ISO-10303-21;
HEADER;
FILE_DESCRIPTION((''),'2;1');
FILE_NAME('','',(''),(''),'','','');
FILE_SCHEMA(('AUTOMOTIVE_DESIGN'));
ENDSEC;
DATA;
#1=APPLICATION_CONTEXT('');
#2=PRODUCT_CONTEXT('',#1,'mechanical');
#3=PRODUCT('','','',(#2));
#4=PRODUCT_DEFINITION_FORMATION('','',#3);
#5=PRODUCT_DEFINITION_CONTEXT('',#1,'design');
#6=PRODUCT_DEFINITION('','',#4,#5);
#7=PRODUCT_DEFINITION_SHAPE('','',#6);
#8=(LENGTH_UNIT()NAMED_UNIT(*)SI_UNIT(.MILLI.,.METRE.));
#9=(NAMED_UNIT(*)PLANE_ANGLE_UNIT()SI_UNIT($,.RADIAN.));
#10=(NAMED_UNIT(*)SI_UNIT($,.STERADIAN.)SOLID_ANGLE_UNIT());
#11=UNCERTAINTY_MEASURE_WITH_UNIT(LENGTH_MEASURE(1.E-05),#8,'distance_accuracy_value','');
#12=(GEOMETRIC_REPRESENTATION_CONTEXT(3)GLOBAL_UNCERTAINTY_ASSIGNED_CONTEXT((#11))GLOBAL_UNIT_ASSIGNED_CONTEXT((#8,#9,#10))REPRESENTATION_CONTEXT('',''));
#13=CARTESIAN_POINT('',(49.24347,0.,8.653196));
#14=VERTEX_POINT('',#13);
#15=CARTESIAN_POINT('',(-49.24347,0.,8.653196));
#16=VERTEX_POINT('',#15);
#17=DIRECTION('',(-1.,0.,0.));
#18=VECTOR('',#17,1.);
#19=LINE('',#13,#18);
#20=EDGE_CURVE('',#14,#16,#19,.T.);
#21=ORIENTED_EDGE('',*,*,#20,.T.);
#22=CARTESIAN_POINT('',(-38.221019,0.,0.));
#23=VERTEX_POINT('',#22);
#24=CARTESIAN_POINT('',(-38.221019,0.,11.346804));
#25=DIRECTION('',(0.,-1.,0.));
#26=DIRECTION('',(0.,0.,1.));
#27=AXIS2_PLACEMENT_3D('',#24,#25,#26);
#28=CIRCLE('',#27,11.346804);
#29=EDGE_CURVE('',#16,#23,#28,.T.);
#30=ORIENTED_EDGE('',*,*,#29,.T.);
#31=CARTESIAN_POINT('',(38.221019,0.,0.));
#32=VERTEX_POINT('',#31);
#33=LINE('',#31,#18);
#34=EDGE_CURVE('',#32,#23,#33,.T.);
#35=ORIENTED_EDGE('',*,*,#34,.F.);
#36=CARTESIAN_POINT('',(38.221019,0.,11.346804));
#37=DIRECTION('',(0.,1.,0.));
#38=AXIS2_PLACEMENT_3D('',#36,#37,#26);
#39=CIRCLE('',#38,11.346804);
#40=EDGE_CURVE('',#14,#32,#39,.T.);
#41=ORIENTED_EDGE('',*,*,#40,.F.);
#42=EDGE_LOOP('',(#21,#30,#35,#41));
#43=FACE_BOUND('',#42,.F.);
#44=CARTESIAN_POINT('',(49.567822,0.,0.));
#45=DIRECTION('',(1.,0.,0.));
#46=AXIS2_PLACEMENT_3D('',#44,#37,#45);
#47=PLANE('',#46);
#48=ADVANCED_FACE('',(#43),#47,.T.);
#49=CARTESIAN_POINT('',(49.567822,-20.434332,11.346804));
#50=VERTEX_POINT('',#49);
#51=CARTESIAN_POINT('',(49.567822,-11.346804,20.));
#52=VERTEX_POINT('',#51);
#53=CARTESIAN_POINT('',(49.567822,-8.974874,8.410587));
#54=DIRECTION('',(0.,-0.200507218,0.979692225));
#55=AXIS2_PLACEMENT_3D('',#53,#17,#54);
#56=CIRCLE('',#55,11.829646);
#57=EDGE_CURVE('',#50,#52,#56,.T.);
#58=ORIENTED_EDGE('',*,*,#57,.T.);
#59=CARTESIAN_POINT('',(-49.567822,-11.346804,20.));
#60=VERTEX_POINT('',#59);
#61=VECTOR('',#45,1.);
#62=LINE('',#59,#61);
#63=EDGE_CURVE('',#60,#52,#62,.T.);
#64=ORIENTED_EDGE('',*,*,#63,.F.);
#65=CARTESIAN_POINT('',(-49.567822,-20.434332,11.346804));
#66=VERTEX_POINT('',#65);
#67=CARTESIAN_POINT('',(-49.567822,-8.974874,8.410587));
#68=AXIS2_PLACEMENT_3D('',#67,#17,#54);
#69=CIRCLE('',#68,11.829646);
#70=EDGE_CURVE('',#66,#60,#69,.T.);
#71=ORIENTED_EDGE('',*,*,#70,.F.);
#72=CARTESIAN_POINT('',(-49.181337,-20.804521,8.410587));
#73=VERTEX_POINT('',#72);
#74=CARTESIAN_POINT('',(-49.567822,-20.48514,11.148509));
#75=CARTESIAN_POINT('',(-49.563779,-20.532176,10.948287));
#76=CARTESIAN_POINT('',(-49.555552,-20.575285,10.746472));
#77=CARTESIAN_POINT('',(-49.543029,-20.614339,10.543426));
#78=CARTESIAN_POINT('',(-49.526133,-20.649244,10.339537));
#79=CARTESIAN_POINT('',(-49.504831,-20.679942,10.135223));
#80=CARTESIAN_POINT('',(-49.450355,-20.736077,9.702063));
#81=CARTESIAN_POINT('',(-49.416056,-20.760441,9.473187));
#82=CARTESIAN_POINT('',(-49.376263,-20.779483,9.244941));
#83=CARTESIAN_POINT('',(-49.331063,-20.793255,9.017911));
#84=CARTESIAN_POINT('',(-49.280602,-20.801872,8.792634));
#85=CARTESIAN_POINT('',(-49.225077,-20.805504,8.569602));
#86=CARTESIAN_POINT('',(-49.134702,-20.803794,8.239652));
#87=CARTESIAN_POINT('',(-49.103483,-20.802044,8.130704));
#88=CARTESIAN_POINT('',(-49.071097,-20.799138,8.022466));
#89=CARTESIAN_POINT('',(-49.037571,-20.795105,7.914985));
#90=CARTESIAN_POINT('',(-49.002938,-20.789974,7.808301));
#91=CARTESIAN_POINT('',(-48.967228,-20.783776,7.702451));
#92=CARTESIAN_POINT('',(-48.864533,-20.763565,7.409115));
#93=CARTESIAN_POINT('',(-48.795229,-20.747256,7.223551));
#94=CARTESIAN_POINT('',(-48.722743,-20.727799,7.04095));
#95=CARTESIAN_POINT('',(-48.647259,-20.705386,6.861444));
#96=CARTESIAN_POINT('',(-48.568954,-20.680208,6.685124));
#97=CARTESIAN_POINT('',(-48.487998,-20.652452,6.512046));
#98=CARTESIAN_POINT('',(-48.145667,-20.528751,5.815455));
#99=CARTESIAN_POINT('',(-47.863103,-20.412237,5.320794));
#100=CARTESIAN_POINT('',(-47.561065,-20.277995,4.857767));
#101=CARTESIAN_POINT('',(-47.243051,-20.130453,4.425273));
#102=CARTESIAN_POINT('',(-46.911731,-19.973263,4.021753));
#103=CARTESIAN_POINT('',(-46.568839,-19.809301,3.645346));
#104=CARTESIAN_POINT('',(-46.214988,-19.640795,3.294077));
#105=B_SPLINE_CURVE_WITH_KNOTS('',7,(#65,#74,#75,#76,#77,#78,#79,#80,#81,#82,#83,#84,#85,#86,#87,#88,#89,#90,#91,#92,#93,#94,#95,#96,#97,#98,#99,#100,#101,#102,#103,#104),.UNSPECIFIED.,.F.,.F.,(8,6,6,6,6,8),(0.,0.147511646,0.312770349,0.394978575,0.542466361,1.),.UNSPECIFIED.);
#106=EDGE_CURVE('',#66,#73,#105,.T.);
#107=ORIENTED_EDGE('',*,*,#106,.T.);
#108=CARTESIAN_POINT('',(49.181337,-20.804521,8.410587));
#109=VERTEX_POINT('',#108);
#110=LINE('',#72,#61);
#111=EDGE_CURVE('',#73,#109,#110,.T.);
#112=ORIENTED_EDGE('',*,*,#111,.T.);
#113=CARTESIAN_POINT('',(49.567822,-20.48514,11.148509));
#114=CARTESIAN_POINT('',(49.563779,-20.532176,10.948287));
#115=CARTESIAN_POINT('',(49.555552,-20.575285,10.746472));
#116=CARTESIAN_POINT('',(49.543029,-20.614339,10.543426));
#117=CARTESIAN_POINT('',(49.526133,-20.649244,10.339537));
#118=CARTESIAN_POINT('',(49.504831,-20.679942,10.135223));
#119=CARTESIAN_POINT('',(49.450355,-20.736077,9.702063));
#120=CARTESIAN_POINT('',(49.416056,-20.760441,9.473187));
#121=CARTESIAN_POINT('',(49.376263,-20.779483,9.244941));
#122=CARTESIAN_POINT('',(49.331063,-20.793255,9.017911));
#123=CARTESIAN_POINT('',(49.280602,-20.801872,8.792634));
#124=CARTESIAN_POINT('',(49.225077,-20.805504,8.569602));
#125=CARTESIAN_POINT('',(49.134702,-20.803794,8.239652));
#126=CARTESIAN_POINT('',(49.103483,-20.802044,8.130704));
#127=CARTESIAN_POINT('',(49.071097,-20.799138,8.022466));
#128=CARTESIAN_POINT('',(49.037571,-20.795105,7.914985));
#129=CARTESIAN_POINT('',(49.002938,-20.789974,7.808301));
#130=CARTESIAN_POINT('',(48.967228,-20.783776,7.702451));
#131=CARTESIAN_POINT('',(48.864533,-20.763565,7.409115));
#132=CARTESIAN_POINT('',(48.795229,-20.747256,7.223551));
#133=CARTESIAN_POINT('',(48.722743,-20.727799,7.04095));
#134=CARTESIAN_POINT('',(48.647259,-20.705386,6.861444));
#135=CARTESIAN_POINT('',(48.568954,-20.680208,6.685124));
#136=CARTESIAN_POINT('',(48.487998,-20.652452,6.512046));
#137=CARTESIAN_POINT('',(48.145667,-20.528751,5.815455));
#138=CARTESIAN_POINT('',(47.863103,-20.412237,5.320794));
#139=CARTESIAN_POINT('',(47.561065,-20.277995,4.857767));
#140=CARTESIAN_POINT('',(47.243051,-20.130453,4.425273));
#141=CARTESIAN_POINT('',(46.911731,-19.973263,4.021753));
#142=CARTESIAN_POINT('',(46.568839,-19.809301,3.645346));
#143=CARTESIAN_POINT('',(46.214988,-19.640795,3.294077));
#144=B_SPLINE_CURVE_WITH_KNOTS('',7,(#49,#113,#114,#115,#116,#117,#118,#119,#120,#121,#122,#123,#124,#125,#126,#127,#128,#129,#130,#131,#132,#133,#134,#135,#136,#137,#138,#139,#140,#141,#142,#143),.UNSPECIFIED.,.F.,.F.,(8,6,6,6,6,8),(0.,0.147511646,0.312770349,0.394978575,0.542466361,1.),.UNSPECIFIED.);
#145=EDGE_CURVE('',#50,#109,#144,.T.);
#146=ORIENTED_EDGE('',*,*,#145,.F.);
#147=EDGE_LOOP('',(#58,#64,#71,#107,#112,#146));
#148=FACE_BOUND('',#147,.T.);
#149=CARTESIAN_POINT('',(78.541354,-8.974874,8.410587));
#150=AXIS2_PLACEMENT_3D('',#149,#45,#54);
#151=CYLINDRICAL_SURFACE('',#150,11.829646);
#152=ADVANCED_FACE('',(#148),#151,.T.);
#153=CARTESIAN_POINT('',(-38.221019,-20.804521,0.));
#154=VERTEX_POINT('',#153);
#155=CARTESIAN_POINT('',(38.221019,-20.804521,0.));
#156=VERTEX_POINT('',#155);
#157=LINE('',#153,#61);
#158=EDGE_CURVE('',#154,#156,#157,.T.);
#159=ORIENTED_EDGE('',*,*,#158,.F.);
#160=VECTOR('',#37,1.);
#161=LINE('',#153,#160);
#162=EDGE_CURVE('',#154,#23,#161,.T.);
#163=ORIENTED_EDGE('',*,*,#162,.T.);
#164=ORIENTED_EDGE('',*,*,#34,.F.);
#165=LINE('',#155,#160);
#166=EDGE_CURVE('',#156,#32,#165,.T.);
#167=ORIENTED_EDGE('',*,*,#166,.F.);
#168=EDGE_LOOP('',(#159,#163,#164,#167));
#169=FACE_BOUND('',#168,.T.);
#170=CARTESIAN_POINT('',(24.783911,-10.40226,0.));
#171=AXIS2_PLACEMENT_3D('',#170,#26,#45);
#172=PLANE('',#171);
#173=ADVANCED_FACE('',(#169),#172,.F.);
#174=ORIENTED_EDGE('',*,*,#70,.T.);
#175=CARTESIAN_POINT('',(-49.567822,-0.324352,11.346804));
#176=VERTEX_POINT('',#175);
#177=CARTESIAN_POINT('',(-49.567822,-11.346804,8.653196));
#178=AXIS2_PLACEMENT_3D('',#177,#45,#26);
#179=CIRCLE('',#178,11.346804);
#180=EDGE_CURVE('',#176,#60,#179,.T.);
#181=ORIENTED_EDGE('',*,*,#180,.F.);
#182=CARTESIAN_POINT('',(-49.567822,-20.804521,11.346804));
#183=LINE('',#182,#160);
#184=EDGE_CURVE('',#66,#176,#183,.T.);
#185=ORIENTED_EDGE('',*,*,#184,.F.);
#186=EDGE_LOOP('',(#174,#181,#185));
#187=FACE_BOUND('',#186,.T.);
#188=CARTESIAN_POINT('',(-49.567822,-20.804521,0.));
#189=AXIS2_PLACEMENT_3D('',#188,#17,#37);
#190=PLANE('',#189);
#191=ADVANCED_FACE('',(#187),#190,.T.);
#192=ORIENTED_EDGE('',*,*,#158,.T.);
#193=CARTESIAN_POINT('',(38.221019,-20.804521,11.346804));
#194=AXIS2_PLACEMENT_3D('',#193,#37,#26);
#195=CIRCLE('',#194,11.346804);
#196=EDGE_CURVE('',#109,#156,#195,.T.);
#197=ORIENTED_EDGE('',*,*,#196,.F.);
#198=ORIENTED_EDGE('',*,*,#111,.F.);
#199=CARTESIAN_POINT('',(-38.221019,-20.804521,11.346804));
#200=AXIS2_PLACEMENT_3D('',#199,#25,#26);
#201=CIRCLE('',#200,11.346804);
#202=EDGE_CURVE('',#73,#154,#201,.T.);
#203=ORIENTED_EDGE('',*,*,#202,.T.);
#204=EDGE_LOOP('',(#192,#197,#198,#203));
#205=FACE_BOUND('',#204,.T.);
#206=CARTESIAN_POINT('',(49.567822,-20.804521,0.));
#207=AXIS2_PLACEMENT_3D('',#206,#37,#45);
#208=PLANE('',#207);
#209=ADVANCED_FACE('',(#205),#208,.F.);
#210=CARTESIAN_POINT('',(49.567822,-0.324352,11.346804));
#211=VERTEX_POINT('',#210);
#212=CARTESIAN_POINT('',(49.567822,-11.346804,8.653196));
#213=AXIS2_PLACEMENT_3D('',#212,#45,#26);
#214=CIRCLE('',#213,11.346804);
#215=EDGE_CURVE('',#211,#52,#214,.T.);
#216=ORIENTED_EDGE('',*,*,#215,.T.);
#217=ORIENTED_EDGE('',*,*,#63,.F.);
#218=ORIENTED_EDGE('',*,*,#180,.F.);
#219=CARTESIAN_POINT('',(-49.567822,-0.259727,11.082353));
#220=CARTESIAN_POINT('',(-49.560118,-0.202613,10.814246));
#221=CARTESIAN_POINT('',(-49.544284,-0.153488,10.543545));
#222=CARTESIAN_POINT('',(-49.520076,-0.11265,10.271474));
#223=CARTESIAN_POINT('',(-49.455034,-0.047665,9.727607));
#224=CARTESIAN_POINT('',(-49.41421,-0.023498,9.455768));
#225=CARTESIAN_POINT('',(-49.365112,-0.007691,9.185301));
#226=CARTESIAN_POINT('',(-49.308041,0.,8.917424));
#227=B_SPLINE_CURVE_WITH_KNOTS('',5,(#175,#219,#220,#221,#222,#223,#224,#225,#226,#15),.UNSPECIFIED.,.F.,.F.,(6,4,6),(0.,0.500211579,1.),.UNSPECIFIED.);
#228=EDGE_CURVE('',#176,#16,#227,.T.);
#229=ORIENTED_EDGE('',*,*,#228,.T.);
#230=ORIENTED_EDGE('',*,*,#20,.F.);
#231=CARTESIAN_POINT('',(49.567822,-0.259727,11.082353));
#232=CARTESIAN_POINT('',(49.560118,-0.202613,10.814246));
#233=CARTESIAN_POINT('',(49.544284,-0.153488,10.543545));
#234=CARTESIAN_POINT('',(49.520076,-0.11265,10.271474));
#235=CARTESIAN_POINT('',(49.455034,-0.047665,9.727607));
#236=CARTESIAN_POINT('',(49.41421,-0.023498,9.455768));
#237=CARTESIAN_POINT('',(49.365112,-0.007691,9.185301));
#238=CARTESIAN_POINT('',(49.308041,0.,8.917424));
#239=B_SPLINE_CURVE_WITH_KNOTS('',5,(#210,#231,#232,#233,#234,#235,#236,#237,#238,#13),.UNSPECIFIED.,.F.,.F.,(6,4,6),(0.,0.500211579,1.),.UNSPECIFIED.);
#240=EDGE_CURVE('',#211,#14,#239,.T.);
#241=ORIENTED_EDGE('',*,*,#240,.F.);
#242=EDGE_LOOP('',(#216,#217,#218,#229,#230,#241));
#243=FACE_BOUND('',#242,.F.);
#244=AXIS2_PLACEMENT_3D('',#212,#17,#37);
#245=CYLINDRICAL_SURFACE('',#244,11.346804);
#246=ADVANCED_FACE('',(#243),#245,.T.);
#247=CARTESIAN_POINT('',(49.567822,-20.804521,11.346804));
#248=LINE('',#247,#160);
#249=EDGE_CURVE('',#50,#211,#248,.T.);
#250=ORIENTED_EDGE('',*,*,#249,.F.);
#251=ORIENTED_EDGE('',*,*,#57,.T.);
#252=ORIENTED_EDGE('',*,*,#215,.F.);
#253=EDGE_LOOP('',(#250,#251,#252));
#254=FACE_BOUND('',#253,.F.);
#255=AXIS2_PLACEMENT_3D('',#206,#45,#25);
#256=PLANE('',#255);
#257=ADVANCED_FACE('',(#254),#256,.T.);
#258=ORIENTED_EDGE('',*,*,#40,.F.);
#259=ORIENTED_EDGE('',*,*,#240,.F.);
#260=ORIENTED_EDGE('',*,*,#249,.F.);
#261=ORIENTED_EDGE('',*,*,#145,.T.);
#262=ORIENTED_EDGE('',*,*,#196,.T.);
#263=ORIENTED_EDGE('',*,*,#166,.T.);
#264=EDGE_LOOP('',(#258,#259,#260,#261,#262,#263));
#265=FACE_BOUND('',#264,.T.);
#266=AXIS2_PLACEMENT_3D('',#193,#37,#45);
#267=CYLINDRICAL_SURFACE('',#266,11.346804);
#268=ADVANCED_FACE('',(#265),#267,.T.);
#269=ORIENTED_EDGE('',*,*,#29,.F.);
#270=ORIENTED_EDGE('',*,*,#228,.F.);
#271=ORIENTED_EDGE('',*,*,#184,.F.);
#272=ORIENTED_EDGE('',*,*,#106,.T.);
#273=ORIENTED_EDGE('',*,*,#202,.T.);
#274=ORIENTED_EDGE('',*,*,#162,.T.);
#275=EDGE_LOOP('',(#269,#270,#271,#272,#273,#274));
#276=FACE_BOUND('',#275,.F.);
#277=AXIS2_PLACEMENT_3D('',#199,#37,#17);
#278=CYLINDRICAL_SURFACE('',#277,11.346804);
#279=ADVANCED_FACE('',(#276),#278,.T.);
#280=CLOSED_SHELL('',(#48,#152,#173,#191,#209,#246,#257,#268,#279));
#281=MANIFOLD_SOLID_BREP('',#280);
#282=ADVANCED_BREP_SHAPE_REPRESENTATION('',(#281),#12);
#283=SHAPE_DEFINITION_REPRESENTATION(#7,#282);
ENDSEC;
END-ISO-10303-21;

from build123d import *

# Parameters (mm, degrees)
F0_W        = 49.567822367
F0_H        = 20.8045206964
F1_DEPTH    = 20
F2_R        = 11.3468037432
F3_T1_DEPTH = 107.5148856448
F4_R        = 11.3468037432


# Not quite as in the source:
# - a fillet or chamfer that OpenCascade refuses, or shapes differently, is made with other operations: its cross-section is extruded or revolved along the edge and cut away or added


with BuildPart() as f1:
    # F0 (on Top) → F1 (new body)
    with BuildSketch(Plane.XY):
        with Locations((-24.7839111835, -10.4022603482)):
            Rectangle(F0_W, F0_H)
    extrude(amount=F1_DEPTH)

    # F2
    f2_edges = [f1.edges().sort_by_distance(p)[0] for p in [
        (-24.783911, 0, 20),
    ]]
    fillet(f2_edges, radius=F2_R)

    # F3: fillet of radius 11.8296464556 on 1 edges, made by hand

    # F3_s2 → F3_t1 (cut)
    with BuildSketch(Plane.YZ.offset(-78.5413540059)):
        with BuildLine():
            ThreePointArc((-11.3468037432, 20), (-18.1400153389, 15.8899405195), (-20.8045206964, 8.4105873444))
            Line((-20.8045206964, 8.4105873444), (-20.8045206964, 20))
            Line((-20.8045206964, 20), (-11.3468037432, 20))
        make_face()
    extrude(amount=F3_T1_DEPTH, mode=Mode.SUBTRACT)

    # F4
    f4_edges = [f1.edges().sort_by_distance(p)[0] for p in [
        (-49.567822, -10.40226, 0),
    ]]
    fillet(f4_edges, radius=F4_R)

    # F5: F1 across face


with BuildPart() as f1_1:
    add(f1.part)
    add(f1.part.mirror(Plane(origin=(0, -10.3947828822, 8.8652235267), x_dir=(0, 1, 0), z_dir=(1, 0, 0))))


solid = f1_1.part
